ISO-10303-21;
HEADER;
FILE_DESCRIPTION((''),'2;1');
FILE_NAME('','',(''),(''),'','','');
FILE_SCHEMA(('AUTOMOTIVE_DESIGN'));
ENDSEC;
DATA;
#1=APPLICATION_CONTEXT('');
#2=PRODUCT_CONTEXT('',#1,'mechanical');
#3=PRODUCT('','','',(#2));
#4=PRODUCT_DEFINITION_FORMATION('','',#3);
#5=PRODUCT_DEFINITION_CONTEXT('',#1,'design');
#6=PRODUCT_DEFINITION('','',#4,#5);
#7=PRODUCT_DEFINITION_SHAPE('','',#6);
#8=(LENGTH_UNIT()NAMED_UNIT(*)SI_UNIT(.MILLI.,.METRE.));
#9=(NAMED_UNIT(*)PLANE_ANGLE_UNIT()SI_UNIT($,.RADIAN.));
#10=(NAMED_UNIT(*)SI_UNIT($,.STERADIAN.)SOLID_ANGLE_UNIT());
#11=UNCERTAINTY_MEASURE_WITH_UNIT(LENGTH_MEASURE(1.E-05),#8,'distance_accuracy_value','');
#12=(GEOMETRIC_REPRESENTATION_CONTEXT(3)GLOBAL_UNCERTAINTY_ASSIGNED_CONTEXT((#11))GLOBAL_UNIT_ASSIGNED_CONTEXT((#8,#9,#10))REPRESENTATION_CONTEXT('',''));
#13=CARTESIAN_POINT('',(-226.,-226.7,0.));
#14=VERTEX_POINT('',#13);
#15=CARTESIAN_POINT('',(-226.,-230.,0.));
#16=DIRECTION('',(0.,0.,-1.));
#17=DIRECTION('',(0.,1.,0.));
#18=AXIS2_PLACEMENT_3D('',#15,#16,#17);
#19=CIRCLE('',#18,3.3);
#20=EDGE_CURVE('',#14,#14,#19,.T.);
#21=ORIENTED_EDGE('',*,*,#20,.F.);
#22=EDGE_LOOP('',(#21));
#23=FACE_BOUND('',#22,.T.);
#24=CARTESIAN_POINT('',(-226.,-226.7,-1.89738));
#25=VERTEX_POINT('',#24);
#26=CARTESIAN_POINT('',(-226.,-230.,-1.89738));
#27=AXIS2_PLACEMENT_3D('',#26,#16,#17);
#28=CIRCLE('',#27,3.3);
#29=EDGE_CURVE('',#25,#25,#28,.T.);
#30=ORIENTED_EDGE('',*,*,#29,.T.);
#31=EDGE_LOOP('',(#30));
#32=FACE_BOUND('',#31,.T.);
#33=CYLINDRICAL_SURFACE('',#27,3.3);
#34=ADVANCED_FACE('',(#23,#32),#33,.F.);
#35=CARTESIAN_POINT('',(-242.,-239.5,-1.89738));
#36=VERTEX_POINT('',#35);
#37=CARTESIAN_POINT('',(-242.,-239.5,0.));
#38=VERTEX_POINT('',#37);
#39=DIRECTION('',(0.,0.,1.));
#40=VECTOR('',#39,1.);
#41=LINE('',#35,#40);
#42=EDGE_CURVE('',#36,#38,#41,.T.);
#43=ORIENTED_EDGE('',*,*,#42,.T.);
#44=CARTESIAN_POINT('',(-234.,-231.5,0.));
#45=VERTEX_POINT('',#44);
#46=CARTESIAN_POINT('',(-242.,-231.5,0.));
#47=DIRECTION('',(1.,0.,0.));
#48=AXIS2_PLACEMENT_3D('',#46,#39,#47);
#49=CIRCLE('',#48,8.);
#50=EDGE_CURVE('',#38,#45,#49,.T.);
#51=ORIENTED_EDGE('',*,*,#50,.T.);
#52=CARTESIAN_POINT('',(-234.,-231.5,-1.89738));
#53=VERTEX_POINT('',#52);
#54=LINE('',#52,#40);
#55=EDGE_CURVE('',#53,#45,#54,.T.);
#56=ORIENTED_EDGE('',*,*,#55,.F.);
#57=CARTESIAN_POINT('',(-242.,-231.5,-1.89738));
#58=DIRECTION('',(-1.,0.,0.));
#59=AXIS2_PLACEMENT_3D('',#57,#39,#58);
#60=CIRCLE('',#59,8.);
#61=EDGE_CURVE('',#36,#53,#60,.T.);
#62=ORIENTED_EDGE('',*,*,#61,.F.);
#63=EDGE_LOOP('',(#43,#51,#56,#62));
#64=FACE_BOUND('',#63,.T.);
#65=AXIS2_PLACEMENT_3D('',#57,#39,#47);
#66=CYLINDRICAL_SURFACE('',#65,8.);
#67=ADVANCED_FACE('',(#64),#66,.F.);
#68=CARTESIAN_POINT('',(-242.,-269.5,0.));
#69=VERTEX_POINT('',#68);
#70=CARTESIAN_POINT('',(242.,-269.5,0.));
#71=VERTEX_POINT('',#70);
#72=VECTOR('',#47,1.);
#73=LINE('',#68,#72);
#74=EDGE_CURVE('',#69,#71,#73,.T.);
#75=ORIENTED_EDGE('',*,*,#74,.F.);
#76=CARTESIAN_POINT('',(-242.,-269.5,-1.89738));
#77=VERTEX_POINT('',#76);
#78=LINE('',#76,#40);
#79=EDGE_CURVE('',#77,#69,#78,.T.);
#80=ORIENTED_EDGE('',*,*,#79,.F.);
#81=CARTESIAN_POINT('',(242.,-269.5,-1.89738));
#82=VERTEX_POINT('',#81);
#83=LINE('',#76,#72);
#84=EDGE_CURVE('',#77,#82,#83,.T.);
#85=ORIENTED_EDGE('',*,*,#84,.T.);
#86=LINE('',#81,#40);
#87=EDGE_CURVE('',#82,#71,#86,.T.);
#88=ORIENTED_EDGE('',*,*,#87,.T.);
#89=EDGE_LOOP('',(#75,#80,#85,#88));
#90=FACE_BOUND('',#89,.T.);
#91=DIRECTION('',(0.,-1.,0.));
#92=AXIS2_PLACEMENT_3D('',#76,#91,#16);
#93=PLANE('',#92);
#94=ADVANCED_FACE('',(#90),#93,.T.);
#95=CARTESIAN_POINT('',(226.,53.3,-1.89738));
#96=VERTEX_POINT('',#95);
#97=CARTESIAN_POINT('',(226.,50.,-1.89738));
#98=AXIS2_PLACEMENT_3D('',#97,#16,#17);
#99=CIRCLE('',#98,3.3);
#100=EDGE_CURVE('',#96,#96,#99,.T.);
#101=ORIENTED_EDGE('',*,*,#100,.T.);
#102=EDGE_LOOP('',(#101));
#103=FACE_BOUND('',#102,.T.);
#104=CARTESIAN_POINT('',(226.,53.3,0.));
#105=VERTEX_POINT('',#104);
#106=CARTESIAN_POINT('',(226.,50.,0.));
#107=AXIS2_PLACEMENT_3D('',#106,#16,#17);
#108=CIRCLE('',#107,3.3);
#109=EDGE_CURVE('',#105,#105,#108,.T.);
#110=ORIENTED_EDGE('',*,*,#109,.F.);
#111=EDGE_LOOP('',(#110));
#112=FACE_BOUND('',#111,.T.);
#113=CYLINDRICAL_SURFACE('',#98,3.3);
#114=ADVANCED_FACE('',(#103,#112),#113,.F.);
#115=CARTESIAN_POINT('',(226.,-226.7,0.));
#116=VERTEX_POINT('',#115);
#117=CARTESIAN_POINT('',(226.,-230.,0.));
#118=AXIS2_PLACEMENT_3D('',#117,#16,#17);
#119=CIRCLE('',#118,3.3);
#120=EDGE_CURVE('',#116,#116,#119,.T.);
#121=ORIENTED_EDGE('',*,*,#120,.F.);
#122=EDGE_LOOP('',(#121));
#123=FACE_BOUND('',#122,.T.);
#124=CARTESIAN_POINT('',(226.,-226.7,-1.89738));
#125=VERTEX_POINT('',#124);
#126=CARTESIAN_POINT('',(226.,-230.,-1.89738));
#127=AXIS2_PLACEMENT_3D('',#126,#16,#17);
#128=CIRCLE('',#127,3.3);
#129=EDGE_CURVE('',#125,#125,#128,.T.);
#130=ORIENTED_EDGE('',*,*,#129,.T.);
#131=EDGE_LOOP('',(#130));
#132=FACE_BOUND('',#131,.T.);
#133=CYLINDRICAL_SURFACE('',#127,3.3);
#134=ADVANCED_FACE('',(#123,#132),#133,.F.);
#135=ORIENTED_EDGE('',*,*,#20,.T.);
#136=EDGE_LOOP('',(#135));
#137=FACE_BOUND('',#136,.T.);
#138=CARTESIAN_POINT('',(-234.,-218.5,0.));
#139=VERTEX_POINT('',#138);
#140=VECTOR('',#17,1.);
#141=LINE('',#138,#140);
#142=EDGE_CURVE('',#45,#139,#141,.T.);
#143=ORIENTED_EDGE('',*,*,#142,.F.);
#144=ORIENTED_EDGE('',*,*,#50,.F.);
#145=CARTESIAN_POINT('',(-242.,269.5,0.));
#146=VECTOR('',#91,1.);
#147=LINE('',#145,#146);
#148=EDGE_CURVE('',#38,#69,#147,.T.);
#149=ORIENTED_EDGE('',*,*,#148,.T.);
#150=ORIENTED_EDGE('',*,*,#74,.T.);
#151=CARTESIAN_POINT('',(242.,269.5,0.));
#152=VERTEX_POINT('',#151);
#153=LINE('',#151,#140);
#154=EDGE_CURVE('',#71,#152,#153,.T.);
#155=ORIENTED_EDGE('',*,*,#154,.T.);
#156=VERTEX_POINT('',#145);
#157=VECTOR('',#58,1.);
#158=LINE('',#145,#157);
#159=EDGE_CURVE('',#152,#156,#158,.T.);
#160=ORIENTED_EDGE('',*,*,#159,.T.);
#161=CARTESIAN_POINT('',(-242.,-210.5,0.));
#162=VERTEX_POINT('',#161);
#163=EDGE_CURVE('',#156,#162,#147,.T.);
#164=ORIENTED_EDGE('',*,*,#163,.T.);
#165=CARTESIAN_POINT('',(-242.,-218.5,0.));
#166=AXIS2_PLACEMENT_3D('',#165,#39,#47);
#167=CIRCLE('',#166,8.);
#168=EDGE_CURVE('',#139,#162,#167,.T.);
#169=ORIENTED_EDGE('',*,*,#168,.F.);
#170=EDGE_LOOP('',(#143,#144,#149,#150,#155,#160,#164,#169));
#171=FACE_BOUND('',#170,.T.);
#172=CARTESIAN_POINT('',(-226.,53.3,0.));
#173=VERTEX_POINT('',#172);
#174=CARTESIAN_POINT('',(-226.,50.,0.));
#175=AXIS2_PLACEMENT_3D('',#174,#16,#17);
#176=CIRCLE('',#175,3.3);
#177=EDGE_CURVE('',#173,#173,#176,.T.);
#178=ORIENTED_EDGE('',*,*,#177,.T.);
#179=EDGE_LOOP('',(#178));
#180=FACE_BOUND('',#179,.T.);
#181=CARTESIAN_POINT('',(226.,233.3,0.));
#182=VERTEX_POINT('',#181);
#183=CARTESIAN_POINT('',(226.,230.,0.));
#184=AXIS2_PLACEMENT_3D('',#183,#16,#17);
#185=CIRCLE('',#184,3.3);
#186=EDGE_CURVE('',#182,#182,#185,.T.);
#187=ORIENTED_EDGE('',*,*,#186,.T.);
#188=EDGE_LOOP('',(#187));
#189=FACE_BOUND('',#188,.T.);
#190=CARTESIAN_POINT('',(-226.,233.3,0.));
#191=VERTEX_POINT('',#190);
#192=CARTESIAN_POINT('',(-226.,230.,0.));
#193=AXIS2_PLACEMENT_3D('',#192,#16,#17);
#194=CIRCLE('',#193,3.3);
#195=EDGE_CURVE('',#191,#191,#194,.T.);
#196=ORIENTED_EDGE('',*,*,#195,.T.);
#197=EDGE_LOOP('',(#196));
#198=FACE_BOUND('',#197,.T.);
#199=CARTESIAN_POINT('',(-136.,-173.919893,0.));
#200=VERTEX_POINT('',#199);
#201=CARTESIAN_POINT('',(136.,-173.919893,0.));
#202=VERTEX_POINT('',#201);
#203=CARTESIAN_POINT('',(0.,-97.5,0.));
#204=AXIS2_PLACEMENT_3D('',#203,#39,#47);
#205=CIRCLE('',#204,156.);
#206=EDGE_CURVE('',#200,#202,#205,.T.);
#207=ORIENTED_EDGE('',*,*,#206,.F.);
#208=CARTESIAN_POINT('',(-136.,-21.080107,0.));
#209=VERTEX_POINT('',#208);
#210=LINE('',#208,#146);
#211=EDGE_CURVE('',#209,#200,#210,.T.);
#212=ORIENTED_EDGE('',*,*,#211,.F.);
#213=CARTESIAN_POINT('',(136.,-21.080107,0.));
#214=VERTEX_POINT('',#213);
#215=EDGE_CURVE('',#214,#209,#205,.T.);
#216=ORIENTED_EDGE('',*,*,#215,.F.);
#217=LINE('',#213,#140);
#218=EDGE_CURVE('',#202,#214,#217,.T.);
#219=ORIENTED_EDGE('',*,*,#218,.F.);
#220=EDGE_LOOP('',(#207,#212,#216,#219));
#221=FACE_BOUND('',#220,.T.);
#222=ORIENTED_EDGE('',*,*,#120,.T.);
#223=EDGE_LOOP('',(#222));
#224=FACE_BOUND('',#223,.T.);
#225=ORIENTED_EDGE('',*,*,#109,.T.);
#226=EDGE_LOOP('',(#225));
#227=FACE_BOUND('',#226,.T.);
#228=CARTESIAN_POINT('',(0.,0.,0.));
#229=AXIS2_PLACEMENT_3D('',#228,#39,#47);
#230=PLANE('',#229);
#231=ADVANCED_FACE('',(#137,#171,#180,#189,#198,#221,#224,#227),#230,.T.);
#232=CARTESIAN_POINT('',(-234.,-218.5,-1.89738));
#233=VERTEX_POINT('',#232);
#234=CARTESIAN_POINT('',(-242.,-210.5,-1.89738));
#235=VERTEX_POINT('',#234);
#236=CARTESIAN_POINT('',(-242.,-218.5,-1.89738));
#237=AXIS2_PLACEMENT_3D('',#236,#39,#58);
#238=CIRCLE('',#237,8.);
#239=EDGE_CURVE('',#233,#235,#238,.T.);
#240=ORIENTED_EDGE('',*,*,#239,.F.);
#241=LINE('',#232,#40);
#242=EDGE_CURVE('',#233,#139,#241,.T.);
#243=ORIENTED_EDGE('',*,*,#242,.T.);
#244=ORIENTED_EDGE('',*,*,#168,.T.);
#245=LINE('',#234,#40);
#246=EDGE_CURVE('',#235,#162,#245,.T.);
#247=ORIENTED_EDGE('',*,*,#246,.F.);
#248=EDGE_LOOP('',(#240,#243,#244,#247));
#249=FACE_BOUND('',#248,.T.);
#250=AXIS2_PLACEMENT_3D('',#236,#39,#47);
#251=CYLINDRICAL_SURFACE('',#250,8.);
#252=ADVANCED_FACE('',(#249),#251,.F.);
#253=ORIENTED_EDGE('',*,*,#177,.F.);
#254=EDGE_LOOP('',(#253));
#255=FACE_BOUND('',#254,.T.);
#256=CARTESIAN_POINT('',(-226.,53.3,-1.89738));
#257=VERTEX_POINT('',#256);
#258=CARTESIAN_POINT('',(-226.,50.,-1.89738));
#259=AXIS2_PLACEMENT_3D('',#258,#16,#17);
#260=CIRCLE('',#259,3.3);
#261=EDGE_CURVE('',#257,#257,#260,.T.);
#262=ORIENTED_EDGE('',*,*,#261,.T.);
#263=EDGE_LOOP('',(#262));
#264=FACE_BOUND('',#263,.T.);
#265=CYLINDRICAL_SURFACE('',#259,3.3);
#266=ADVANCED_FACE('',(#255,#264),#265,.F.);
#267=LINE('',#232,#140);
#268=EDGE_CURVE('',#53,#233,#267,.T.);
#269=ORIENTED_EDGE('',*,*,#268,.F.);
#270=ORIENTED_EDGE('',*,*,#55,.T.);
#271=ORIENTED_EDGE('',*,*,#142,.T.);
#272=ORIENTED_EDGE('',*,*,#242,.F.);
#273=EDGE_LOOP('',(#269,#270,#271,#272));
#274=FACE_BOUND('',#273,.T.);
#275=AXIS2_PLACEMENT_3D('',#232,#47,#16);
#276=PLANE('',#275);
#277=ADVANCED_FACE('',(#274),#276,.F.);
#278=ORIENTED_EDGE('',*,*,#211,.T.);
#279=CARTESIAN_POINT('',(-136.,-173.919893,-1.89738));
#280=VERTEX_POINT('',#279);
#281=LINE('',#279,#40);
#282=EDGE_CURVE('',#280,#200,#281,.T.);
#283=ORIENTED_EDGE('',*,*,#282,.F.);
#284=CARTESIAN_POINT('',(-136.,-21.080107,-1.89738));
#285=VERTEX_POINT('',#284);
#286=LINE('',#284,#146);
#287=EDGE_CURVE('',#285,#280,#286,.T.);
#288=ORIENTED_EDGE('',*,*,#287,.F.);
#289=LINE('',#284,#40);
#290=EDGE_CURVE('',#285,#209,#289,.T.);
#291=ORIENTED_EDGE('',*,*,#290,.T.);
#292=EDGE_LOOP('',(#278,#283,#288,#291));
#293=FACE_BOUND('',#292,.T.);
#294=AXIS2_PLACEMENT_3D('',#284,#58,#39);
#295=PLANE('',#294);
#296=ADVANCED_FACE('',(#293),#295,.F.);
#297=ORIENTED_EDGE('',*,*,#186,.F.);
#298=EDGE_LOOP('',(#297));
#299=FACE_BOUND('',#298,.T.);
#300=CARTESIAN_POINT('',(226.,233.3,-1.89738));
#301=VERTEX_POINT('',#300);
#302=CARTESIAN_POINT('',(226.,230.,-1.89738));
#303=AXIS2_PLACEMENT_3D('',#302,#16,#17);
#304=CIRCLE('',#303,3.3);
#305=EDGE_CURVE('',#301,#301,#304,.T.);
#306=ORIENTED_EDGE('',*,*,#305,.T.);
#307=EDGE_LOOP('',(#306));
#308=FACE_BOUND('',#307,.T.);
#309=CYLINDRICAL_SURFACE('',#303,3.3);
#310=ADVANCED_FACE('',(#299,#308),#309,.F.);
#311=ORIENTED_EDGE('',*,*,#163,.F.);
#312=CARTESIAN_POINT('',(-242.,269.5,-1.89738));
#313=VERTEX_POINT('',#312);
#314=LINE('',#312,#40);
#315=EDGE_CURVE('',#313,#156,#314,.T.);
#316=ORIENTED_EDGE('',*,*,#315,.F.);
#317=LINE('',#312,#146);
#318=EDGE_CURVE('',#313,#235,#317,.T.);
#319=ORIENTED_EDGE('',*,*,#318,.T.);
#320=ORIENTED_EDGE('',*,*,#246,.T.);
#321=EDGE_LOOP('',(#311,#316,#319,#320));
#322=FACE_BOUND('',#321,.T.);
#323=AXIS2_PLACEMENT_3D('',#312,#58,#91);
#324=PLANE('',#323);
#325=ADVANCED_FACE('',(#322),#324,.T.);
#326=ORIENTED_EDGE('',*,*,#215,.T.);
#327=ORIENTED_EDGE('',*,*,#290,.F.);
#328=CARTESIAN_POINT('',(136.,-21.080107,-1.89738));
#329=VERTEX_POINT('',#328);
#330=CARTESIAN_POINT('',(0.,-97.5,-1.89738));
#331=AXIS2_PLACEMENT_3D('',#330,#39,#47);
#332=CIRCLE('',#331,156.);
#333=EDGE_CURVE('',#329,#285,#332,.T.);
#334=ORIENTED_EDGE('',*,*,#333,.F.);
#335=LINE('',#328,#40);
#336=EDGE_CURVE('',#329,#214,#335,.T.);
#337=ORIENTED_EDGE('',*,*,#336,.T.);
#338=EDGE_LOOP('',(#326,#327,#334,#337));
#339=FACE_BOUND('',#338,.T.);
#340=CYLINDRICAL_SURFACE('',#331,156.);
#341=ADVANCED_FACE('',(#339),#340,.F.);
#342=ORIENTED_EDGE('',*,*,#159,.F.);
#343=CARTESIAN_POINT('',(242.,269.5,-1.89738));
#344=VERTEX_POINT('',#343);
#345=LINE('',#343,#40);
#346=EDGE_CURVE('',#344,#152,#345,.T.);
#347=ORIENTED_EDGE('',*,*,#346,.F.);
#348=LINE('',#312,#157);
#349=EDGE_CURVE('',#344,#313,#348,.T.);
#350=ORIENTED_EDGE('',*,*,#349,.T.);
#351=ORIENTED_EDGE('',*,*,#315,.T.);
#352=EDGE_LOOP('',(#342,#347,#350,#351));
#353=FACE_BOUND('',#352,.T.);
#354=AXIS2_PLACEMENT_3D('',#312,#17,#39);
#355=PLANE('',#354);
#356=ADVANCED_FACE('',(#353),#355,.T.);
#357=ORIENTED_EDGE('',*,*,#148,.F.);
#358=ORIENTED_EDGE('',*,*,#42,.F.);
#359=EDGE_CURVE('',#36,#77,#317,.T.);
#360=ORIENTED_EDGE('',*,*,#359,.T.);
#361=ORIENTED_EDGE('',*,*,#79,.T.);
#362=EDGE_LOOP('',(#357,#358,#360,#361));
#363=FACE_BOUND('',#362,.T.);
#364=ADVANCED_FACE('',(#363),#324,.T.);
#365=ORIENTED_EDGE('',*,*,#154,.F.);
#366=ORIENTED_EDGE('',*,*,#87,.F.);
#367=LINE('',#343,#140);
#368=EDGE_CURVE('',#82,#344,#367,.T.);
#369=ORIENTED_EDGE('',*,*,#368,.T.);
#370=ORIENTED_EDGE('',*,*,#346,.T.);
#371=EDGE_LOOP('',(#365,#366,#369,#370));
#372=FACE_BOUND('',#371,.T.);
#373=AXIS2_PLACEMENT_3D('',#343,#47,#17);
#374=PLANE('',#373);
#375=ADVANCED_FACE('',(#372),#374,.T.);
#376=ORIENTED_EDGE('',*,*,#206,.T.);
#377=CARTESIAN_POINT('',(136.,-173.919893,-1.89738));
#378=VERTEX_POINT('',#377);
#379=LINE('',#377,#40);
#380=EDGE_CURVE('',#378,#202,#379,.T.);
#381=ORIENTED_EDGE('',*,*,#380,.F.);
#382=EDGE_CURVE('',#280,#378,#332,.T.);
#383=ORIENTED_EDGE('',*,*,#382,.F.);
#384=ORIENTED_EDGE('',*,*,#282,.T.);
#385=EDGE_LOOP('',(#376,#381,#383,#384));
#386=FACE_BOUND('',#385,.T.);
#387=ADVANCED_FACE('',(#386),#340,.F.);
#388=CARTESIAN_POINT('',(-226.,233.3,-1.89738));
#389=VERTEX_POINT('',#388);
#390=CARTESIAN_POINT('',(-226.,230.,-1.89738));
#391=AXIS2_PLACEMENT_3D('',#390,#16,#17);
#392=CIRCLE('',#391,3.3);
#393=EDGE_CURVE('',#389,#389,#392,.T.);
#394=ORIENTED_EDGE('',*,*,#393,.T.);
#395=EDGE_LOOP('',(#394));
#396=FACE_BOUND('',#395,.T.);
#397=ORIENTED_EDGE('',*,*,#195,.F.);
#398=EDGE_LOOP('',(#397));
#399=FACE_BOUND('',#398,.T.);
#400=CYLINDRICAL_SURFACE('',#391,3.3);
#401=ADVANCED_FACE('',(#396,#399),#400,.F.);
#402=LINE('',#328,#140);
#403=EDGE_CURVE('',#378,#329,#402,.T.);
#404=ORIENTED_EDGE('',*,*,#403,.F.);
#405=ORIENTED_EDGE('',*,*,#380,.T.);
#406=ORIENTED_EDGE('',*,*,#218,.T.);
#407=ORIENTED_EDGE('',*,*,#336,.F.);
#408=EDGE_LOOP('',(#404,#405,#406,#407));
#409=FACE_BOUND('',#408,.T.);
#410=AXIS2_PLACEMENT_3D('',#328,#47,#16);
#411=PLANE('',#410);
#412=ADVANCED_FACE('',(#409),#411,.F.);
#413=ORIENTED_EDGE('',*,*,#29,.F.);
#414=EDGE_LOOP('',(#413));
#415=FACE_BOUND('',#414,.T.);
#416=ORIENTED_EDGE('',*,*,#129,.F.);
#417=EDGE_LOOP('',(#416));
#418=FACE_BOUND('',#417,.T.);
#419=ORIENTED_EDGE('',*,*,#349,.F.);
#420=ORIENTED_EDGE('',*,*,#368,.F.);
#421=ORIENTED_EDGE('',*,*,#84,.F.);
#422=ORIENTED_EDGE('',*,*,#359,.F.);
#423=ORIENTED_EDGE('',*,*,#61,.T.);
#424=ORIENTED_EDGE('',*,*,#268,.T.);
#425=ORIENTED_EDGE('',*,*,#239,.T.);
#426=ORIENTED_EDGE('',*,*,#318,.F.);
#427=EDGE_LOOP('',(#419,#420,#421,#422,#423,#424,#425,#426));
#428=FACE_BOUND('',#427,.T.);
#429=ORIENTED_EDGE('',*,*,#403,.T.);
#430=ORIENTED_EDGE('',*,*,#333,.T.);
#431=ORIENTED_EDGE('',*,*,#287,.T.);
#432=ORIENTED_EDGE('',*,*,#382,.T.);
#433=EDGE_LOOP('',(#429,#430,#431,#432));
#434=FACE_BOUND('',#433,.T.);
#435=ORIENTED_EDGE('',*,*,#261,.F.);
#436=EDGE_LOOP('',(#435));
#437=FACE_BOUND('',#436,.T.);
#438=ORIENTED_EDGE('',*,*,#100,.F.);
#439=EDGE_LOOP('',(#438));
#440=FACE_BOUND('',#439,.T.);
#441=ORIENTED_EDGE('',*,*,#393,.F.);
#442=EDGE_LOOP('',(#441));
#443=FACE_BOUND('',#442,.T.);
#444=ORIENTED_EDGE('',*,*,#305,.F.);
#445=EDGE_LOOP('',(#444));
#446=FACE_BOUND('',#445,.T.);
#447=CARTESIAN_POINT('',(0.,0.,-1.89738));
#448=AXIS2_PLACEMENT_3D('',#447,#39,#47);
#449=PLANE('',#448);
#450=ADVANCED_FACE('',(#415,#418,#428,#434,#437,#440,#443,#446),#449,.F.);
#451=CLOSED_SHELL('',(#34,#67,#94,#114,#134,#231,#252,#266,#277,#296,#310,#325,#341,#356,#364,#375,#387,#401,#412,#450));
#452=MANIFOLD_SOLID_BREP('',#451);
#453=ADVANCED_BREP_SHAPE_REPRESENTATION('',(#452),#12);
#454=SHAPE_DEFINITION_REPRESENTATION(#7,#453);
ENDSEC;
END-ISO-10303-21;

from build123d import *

# Parameters (mm, degrees)
SKETCH1_W               = 484
SKETCH1_H               = 539
BASE_FLANGE1_DEPTH      = 1.89738
M6_CLEARANCE_HOLE1_D    = 6.6
CUT_EXTRUDE1_DEPTH      = 363.212437736
CUT_EXTRUDE1_DEPTH_BACK = 363.212437736


# Sheet-metal steps are written as plain solids
with BuildPart() as part:
    # Sketch1 → Base-Flange1 (new body)
    with BuildSketch(Plane.XY):
        Rectangle(SKETCH1_W, SKETCH1_H)
        with BuildLine():
            Line((136, -21.080107302), (136, -173.919892698))
            ThreePointArc((136, -173.919892698), (0, -253.5), (-136, -173.919892698))
            Line((-136, -173.919892698), (-136, -21.080107302))
            ThreePointArc((-136, -21.080107302), (0, 58.5), (136, -21.080107302))
        make_face(mode=Mode.SUBTRACT)
    extrude(amount=-BASE_FLANGE1_DEPTH)

    # M6 Clearance Hole1 (through all)
    with Locations(Plane(origin=(0, 0, -1.89738), x_dir=(-1, 0, 0), z_dir=(0, 0, -1))):
        with Locations((-226, 230), (226, 230), (226, -230), (-226, -230), (-226, 50), (226, 50)):
            Hole(M6_CLEARANCE_HOLE1_D / 2)

    # Sketch21 → Cut-Extrude1 (cut, two sides: drawn at the far end of the back side and taken through both)
    with BuildSketch(Plane.XY.offset(-CUT_EXTRUDE1_DEPTH_BACK)):
        with BuildLine():
            Line((-234, -218.5), (-234, -231.5))
            ThreePointArc((-234, -231.5), (-236.343145751, -237.156854249), (-242, -239.5))
            Line((-242, -239.5), (-242, -210.5))
            ThreePointArc((-242, -210.5), (-236.343145751, -212.843145751), (-234, -218.5))
        make_face()
    extrude(amount=CUT_EXTRUDE1_DEPTH + CUT_EXTRUDE1_DEPTH_BACK, mode=Mode.SUBTRACT)


solid = part.part
